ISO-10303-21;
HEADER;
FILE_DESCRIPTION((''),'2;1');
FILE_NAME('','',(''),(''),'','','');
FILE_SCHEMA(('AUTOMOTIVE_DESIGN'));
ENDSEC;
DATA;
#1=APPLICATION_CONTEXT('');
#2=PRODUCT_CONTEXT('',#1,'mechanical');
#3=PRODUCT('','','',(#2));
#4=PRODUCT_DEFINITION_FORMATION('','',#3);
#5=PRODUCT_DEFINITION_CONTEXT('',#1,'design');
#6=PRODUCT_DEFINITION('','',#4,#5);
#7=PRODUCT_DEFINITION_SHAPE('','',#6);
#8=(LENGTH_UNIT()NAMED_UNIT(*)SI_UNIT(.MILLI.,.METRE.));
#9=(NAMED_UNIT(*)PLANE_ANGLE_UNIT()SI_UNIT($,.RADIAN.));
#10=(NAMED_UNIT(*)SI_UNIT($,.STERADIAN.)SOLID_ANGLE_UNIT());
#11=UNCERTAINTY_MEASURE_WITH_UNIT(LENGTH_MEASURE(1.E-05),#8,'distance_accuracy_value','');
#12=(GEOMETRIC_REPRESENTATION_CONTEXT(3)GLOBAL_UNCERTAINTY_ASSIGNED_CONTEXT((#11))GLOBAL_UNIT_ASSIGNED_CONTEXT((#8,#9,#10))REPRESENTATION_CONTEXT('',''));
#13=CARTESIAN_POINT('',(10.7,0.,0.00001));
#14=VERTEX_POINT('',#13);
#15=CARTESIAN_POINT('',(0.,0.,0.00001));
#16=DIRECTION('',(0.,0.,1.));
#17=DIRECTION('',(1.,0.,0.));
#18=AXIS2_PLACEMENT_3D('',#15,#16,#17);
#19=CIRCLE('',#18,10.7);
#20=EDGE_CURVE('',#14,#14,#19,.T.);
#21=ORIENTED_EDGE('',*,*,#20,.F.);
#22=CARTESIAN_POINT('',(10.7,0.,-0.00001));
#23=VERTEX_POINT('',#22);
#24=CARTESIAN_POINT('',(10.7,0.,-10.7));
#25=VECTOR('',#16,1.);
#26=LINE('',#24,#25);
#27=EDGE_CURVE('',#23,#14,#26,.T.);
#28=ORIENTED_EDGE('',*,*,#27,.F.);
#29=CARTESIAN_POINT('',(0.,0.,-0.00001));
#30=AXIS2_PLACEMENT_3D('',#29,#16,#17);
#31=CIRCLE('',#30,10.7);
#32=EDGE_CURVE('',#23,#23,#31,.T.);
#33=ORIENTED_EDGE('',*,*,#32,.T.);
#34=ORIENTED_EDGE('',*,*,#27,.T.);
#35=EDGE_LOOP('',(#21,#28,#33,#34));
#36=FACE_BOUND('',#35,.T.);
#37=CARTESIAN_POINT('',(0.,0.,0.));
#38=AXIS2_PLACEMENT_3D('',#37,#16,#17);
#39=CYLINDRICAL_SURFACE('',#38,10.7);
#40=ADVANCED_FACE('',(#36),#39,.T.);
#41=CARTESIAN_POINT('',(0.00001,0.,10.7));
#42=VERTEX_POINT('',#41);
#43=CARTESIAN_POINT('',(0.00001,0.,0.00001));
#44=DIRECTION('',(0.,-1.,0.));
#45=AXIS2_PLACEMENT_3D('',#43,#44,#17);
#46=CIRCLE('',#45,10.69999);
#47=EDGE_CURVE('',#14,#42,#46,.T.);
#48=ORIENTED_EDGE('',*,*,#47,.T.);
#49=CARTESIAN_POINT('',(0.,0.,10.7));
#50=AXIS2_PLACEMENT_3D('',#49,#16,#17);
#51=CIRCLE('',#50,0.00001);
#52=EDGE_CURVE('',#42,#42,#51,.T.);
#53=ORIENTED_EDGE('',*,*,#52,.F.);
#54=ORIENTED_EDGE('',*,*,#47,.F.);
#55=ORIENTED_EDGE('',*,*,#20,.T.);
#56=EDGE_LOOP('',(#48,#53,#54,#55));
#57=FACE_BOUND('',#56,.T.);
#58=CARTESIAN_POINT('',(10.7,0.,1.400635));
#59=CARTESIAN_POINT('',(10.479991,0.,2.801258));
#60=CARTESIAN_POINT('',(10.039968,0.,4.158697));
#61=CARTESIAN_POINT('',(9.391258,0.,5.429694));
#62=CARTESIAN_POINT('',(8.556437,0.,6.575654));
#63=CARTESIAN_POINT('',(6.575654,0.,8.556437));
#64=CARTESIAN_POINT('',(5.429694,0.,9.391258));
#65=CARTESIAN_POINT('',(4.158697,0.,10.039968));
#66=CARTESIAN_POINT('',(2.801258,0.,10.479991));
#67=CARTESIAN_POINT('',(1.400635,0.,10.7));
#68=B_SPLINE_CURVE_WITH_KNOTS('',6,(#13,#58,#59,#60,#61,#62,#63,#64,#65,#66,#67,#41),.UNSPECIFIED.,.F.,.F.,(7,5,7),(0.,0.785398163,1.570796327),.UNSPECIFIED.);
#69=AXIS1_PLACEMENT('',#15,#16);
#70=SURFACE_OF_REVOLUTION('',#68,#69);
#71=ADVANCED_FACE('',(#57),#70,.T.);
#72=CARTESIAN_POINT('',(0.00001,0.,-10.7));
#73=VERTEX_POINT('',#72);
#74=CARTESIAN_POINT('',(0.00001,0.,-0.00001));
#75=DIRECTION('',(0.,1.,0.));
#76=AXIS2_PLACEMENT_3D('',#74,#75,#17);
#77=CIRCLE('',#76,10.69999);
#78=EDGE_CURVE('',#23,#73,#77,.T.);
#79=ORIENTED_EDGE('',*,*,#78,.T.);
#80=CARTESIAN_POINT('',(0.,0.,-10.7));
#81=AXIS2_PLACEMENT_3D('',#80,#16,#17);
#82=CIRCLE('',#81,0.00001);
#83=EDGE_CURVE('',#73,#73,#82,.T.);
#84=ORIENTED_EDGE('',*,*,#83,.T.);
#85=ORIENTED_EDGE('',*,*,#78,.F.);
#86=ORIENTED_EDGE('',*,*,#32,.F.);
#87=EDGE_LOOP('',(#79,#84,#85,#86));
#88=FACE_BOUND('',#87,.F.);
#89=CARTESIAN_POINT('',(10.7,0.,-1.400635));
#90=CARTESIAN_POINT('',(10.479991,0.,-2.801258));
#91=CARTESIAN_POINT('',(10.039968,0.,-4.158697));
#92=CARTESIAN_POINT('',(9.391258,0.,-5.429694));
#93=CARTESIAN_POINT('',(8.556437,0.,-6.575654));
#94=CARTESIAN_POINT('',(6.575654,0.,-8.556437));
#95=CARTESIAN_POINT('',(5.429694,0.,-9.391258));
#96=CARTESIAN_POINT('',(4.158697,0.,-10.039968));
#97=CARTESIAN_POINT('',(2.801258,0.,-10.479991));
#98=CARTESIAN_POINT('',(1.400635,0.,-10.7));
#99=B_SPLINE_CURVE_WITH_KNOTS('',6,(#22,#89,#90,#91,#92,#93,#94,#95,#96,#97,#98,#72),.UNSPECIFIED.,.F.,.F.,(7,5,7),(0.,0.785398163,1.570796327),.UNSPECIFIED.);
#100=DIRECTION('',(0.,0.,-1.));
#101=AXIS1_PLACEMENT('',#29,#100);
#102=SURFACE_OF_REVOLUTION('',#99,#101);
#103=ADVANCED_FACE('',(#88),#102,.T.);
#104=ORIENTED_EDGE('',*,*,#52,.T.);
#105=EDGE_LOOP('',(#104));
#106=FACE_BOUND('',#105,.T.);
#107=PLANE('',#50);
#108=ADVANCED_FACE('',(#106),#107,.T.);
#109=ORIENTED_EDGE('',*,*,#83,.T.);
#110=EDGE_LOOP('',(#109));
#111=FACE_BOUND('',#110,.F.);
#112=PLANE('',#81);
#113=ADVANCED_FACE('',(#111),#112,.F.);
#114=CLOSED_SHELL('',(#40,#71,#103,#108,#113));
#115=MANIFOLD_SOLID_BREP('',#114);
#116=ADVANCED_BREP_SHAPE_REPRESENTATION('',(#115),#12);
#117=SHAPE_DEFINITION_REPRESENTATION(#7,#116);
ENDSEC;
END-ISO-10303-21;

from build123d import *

# Parameters (mm, degrees)
F0_R          = 10.7
F1_DEPTH      = 10.7
F1_DEPTH_BACK = 10.7
F2_R          = 10.69999


# Not quite as in the source:
# - a fillet or chamfer is up to 0.001 mm smaller than in the source, because OpenCascade refuses the exact size


with BuildPart() as f1:
    # F0 (on Top) → F1 (new body, two sides)
    with BuildSketch(Plane.XY) as f1_sk:
        Circle(F0_R)
    extrude(amount=F1_DEPTH)
    extrude(f1_sk.sketch, amount=-F1_DEPTH_BACK)

    # F2 (radius 10.7 in the source; OpenCascade refuses exactly that, so slightly less here)
    f2_edges = [f1.edges().sort_by_distance(p)[0] for p in [
        (10.7, 0, 5.35),
        (-10.7, 0, 0),
        (-10.7, 0, 10.7),
    ]]
    fillet(f2_edges, radius=F2_R)


solid = f1.part
